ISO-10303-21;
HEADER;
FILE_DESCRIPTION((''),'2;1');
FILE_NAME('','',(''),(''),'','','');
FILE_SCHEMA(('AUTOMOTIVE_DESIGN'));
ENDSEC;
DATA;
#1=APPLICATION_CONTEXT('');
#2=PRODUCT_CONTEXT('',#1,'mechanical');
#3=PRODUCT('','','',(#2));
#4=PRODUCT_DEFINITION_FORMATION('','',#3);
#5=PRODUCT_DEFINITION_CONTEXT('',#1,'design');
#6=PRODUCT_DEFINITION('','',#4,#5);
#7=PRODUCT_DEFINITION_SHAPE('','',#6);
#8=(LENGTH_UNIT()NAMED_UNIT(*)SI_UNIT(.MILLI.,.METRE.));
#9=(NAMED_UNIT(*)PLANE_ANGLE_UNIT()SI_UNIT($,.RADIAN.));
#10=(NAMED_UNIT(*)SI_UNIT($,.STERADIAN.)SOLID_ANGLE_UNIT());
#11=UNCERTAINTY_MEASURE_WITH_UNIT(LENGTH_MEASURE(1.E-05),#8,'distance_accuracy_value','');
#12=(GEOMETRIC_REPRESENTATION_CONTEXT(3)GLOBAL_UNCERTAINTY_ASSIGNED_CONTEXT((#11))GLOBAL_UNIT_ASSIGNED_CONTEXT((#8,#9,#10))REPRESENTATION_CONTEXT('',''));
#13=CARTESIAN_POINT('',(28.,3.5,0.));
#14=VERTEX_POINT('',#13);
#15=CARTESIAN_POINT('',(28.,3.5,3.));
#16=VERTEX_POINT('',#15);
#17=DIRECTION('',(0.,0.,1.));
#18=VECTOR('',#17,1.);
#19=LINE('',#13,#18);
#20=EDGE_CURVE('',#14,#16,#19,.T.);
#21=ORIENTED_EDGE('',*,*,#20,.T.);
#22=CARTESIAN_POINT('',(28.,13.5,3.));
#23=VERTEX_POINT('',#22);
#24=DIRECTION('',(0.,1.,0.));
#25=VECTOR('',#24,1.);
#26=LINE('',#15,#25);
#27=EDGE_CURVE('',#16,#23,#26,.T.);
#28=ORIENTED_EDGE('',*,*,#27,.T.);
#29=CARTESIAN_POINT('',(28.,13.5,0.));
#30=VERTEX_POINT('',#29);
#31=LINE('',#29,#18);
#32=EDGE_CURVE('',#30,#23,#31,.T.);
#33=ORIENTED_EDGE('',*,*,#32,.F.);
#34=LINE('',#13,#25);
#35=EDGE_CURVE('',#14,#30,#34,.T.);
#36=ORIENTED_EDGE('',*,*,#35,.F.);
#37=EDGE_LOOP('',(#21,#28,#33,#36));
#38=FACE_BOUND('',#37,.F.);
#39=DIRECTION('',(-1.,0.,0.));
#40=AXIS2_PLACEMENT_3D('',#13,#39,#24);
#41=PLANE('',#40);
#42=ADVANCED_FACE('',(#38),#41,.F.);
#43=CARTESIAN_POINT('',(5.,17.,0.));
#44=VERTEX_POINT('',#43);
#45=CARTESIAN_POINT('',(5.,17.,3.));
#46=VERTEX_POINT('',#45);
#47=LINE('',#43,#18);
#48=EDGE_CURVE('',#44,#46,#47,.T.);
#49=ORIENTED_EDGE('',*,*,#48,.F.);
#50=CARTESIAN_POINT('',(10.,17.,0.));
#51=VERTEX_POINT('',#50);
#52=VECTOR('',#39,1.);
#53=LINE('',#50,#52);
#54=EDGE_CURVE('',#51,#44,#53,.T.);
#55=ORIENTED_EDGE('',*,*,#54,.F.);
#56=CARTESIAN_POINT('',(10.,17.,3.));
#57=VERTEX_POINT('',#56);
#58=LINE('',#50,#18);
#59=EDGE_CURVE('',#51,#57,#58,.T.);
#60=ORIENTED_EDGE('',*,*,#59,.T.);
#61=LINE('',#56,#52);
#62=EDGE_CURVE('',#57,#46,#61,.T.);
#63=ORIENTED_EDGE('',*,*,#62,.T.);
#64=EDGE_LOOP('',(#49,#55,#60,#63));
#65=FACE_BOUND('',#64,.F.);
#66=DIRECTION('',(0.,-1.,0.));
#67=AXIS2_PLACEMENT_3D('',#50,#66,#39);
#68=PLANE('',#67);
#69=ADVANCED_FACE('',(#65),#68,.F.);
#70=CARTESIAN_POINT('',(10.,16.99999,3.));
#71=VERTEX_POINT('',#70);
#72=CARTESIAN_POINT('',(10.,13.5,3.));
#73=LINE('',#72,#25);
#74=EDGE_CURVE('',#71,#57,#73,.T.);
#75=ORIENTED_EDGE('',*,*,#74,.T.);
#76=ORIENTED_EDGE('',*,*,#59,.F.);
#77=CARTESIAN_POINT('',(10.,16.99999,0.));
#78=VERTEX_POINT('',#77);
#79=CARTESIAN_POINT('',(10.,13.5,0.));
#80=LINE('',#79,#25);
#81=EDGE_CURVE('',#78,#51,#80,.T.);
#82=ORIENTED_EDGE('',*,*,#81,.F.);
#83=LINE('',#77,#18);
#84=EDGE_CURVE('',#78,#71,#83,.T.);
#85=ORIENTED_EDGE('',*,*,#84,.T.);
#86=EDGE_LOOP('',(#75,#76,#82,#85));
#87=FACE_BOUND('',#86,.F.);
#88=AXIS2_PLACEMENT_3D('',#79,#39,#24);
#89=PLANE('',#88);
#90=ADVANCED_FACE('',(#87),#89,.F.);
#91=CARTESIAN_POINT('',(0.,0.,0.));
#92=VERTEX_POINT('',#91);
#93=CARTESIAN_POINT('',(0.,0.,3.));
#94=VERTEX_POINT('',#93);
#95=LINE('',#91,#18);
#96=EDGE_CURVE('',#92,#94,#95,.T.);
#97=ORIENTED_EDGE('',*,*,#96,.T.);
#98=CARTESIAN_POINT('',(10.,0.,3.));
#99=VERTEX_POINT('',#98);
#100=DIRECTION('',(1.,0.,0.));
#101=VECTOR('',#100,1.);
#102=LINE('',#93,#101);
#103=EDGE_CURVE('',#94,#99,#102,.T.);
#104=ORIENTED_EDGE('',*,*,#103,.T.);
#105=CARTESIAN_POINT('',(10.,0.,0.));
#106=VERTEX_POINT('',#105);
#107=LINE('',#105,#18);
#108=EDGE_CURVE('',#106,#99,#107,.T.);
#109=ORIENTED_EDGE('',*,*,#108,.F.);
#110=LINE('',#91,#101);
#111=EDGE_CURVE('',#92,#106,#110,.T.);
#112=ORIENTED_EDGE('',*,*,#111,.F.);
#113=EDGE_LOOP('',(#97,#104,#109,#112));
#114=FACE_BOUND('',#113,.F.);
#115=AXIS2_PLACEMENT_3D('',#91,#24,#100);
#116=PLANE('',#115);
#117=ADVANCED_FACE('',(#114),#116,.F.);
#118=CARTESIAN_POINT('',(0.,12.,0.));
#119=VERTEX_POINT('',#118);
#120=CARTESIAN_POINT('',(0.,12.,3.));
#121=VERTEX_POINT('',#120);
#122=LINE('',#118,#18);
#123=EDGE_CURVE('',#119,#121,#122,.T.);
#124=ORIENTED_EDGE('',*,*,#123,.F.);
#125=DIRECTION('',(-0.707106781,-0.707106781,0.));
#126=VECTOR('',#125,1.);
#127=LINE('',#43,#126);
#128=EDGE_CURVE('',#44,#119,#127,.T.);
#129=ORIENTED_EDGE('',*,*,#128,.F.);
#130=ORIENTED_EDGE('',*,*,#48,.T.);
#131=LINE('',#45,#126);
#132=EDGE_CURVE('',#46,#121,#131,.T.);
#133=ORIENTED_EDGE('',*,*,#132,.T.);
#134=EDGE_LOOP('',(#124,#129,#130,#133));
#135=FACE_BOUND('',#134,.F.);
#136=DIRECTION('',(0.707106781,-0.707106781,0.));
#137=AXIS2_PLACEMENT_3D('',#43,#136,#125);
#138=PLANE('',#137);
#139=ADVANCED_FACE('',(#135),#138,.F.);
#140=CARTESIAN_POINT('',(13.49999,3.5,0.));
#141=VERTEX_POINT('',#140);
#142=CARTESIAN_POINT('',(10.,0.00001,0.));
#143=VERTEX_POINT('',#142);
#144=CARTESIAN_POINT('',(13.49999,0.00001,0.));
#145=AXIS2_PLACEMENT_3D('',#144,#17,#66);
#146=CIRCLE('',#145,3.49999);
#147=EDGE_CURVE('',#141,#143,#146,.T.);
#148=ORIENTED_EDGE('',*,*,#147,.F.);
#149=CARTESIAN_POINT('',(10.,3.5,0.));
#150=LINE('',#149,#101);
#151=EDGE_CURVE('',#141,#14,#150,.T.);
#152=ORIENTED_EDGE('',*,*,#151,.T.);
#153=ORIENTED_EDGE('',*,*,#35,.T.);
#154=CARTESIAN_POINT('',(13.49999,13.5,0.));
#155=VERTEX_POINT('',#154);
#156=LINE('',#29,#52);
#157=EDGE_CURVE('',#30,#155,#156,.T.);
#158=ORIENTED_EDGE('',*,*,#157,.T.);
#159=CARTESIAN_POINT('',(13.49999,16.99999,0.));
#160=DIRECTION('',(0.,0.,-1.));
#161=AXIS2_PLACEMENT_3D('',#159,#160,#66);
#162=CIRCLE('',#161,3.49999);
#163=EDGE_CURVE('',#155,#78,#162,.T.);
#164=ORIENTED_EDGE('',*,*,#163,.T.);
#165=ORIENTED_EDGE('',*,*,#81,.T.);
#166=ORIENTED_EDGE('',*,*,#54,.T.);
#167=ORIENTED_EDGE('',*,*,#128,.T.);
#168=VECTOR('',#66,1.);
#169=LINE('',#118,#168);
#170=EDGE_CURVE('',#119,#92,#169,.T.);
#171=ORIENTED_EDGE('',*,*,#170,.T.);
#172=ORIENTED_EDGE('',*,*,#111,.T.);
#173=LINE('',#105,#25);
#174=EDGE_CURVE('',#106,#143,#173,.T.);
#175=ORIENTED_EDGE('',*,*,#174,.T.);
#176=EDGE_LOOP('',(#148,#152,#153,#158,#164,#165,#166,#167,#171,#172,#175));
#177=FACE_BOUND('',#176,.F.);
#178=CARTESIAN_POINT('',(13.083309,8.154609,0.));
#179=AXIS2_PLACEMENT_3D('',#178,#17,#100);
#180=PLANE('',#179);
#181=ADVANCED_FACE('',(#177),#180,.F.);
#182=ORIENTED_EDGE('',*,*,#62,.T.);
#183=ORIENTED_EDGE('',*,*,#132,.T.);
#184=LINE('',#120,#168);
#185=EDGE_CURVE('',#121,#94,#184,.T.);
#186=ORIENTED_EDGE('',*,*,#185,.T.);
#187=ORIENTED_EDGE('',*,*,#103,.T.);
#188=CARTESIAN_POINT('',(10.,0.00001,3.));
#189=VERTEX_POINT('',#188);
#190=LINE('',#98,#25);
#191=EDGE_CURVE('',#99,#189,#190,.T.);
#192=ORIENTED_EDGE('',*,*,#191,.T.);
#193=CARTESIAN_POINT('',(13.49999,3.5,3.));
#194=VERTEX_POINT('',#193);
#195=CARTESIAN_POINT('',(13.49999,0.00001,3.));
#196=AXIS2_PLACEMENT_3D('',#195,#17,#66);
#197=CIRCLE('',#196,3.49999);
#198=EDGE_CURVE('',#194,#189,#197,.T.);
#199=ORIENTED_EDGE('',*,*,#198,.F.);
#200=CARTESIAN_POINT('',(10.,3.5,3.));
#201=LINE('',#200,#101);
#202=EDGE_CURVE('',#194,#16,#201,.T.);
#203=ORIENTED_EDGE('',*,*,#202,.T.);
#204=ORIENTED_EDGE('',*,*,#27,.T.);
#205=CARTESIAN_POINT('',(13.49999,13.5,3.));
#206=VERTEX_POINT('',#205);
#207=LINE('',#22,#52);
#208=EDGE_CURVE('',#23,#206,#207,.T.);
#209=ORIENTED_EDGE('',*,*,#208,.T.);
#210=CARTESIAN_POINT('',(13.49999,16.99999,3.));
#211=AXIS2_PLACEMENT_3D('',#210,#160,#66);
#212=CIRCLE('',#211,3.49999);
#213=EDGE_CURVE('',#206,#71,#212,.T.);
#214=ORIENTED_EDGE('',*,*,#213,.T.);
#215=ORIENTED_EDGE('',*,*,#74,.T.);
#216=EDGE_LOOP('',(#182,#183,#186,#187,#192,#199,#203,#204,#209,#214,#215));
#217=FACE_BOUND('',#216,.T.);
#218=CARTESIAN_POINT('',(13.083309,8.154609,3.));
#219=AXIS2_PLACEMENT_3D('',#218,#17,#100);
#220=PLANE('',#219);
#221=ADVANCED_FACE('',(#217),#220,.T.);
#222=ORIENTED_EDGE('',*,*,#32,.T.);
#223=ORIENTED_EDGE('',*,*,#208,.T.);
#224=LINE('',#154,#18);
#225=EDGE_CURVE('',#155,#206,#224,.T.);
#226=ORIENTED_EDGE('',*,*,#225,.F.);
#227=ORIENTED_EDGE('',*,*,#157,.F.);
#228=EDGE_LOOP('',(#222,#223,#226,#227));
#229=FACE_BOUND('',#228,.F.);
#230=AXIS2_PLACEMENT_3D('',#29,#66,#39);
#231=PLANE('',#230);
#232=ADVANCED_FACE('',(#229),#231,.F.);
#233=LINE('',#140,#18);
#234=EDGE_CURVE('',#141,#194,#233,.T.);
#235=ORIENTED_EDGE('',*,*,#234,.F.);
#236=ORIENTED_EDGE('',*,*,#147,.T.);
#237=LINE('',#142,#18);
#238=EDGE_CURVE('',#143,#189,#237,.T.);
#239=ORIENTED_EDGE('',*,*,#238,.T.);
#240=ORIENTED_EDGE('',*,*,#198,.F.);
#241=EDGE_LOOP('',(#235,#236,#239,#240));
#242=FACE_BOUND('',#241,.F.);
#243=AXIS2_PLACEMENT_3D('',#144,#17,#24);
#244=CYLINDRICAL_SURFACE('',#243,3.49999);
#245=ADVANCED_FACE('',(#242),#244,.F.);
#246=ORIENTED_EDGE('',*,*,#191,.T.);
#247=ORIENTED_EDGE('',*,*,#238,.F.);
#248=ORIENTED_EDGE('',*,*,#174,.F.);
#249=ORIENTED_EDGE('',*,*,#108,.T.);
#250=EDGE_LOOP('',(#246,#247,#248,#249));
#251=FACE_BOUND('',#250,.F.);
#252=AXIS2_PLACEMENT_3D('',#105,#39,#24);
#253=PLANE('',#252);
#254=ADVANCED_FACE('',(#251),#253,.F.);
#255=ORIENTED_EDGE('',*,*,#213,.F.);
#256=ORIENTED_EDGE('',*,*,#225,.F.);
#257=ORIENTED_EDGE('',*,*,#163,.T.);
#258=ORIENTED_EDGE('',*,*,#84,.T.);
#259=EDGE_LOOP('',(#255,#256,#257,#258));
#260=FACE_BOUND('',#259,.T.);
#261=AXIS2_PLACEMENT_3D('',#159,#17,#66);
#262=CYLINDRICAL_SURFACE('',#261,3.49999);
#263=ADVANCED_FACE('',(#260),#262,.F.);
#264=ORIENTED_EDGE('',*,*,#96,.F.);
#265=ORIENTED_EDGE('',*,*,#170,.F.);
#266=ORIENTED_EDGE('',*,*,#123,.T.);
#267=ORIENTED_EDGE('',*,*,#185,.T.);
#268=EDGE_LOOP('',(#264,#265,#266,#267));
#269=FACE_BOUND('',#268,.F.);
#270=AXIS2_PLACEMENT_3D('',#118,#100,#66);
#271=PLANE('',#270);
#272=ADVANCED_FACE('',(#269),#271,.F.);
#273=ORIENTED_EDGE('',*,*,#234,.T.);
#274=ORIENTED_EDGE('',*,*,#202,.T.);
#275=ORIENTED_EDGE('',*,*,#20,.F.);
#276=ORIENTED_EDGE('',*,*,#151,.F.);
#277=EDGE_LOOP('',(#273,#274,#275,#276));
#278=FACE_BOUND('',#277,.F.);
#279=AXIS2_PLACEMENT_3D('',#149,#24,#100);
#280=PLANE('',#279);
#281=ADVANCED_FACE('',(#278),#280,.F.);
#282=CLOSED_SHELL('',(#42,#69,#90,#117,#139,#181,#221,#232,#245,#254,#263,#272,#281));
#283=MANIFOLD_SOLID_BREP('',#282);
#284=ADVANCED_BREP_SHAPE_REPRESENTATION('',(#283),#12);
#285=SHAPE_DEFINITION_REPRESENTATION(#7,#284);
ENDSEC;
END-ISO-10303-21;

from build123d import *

# Parameters (mm, degrees)
F1_DEPTH = 3
F2_R     = 3.49999
F3_R     = 3.49999


# Not quite as in the source:
# - a fillet or chamfer is up to 0.001 mm smaller than in the source, because OpenCascade refuses the exact size


with BuildPart() as f1:
    # F0 (on Top) → F1 (new body)
    with BuildSketch(Plane.XY):
        Polygon((0, 12), (0, 0), (10, 0), (10, 3.5), (28, 3.5), (28, 13.5), (10, 13.5), (10, 17), (5, 17), align=None)
    extrude(amount=F1_DEPTH)

    # F2 (radius 3.5 in the source; OpenCascade refuses exactly that, so slightly less here)
    f2_edges = [f1.edges().sort_by_distance(p)[0] for p in [
        (10, 13.5, 1.5),
    ]]
    fillet(f2_edges, radius=F2_R)

    # F3 (radius 3.5 in the source; OpenCascade refuses exactly that, so slightly less here)
    f3_edges = [f1.edges().sort_by_distance(p)[0] for p in [
        (10, 3.5, 1.5),
    ]]
    fillet(f3_edges, radius=F3_R)


solid = f1.part
